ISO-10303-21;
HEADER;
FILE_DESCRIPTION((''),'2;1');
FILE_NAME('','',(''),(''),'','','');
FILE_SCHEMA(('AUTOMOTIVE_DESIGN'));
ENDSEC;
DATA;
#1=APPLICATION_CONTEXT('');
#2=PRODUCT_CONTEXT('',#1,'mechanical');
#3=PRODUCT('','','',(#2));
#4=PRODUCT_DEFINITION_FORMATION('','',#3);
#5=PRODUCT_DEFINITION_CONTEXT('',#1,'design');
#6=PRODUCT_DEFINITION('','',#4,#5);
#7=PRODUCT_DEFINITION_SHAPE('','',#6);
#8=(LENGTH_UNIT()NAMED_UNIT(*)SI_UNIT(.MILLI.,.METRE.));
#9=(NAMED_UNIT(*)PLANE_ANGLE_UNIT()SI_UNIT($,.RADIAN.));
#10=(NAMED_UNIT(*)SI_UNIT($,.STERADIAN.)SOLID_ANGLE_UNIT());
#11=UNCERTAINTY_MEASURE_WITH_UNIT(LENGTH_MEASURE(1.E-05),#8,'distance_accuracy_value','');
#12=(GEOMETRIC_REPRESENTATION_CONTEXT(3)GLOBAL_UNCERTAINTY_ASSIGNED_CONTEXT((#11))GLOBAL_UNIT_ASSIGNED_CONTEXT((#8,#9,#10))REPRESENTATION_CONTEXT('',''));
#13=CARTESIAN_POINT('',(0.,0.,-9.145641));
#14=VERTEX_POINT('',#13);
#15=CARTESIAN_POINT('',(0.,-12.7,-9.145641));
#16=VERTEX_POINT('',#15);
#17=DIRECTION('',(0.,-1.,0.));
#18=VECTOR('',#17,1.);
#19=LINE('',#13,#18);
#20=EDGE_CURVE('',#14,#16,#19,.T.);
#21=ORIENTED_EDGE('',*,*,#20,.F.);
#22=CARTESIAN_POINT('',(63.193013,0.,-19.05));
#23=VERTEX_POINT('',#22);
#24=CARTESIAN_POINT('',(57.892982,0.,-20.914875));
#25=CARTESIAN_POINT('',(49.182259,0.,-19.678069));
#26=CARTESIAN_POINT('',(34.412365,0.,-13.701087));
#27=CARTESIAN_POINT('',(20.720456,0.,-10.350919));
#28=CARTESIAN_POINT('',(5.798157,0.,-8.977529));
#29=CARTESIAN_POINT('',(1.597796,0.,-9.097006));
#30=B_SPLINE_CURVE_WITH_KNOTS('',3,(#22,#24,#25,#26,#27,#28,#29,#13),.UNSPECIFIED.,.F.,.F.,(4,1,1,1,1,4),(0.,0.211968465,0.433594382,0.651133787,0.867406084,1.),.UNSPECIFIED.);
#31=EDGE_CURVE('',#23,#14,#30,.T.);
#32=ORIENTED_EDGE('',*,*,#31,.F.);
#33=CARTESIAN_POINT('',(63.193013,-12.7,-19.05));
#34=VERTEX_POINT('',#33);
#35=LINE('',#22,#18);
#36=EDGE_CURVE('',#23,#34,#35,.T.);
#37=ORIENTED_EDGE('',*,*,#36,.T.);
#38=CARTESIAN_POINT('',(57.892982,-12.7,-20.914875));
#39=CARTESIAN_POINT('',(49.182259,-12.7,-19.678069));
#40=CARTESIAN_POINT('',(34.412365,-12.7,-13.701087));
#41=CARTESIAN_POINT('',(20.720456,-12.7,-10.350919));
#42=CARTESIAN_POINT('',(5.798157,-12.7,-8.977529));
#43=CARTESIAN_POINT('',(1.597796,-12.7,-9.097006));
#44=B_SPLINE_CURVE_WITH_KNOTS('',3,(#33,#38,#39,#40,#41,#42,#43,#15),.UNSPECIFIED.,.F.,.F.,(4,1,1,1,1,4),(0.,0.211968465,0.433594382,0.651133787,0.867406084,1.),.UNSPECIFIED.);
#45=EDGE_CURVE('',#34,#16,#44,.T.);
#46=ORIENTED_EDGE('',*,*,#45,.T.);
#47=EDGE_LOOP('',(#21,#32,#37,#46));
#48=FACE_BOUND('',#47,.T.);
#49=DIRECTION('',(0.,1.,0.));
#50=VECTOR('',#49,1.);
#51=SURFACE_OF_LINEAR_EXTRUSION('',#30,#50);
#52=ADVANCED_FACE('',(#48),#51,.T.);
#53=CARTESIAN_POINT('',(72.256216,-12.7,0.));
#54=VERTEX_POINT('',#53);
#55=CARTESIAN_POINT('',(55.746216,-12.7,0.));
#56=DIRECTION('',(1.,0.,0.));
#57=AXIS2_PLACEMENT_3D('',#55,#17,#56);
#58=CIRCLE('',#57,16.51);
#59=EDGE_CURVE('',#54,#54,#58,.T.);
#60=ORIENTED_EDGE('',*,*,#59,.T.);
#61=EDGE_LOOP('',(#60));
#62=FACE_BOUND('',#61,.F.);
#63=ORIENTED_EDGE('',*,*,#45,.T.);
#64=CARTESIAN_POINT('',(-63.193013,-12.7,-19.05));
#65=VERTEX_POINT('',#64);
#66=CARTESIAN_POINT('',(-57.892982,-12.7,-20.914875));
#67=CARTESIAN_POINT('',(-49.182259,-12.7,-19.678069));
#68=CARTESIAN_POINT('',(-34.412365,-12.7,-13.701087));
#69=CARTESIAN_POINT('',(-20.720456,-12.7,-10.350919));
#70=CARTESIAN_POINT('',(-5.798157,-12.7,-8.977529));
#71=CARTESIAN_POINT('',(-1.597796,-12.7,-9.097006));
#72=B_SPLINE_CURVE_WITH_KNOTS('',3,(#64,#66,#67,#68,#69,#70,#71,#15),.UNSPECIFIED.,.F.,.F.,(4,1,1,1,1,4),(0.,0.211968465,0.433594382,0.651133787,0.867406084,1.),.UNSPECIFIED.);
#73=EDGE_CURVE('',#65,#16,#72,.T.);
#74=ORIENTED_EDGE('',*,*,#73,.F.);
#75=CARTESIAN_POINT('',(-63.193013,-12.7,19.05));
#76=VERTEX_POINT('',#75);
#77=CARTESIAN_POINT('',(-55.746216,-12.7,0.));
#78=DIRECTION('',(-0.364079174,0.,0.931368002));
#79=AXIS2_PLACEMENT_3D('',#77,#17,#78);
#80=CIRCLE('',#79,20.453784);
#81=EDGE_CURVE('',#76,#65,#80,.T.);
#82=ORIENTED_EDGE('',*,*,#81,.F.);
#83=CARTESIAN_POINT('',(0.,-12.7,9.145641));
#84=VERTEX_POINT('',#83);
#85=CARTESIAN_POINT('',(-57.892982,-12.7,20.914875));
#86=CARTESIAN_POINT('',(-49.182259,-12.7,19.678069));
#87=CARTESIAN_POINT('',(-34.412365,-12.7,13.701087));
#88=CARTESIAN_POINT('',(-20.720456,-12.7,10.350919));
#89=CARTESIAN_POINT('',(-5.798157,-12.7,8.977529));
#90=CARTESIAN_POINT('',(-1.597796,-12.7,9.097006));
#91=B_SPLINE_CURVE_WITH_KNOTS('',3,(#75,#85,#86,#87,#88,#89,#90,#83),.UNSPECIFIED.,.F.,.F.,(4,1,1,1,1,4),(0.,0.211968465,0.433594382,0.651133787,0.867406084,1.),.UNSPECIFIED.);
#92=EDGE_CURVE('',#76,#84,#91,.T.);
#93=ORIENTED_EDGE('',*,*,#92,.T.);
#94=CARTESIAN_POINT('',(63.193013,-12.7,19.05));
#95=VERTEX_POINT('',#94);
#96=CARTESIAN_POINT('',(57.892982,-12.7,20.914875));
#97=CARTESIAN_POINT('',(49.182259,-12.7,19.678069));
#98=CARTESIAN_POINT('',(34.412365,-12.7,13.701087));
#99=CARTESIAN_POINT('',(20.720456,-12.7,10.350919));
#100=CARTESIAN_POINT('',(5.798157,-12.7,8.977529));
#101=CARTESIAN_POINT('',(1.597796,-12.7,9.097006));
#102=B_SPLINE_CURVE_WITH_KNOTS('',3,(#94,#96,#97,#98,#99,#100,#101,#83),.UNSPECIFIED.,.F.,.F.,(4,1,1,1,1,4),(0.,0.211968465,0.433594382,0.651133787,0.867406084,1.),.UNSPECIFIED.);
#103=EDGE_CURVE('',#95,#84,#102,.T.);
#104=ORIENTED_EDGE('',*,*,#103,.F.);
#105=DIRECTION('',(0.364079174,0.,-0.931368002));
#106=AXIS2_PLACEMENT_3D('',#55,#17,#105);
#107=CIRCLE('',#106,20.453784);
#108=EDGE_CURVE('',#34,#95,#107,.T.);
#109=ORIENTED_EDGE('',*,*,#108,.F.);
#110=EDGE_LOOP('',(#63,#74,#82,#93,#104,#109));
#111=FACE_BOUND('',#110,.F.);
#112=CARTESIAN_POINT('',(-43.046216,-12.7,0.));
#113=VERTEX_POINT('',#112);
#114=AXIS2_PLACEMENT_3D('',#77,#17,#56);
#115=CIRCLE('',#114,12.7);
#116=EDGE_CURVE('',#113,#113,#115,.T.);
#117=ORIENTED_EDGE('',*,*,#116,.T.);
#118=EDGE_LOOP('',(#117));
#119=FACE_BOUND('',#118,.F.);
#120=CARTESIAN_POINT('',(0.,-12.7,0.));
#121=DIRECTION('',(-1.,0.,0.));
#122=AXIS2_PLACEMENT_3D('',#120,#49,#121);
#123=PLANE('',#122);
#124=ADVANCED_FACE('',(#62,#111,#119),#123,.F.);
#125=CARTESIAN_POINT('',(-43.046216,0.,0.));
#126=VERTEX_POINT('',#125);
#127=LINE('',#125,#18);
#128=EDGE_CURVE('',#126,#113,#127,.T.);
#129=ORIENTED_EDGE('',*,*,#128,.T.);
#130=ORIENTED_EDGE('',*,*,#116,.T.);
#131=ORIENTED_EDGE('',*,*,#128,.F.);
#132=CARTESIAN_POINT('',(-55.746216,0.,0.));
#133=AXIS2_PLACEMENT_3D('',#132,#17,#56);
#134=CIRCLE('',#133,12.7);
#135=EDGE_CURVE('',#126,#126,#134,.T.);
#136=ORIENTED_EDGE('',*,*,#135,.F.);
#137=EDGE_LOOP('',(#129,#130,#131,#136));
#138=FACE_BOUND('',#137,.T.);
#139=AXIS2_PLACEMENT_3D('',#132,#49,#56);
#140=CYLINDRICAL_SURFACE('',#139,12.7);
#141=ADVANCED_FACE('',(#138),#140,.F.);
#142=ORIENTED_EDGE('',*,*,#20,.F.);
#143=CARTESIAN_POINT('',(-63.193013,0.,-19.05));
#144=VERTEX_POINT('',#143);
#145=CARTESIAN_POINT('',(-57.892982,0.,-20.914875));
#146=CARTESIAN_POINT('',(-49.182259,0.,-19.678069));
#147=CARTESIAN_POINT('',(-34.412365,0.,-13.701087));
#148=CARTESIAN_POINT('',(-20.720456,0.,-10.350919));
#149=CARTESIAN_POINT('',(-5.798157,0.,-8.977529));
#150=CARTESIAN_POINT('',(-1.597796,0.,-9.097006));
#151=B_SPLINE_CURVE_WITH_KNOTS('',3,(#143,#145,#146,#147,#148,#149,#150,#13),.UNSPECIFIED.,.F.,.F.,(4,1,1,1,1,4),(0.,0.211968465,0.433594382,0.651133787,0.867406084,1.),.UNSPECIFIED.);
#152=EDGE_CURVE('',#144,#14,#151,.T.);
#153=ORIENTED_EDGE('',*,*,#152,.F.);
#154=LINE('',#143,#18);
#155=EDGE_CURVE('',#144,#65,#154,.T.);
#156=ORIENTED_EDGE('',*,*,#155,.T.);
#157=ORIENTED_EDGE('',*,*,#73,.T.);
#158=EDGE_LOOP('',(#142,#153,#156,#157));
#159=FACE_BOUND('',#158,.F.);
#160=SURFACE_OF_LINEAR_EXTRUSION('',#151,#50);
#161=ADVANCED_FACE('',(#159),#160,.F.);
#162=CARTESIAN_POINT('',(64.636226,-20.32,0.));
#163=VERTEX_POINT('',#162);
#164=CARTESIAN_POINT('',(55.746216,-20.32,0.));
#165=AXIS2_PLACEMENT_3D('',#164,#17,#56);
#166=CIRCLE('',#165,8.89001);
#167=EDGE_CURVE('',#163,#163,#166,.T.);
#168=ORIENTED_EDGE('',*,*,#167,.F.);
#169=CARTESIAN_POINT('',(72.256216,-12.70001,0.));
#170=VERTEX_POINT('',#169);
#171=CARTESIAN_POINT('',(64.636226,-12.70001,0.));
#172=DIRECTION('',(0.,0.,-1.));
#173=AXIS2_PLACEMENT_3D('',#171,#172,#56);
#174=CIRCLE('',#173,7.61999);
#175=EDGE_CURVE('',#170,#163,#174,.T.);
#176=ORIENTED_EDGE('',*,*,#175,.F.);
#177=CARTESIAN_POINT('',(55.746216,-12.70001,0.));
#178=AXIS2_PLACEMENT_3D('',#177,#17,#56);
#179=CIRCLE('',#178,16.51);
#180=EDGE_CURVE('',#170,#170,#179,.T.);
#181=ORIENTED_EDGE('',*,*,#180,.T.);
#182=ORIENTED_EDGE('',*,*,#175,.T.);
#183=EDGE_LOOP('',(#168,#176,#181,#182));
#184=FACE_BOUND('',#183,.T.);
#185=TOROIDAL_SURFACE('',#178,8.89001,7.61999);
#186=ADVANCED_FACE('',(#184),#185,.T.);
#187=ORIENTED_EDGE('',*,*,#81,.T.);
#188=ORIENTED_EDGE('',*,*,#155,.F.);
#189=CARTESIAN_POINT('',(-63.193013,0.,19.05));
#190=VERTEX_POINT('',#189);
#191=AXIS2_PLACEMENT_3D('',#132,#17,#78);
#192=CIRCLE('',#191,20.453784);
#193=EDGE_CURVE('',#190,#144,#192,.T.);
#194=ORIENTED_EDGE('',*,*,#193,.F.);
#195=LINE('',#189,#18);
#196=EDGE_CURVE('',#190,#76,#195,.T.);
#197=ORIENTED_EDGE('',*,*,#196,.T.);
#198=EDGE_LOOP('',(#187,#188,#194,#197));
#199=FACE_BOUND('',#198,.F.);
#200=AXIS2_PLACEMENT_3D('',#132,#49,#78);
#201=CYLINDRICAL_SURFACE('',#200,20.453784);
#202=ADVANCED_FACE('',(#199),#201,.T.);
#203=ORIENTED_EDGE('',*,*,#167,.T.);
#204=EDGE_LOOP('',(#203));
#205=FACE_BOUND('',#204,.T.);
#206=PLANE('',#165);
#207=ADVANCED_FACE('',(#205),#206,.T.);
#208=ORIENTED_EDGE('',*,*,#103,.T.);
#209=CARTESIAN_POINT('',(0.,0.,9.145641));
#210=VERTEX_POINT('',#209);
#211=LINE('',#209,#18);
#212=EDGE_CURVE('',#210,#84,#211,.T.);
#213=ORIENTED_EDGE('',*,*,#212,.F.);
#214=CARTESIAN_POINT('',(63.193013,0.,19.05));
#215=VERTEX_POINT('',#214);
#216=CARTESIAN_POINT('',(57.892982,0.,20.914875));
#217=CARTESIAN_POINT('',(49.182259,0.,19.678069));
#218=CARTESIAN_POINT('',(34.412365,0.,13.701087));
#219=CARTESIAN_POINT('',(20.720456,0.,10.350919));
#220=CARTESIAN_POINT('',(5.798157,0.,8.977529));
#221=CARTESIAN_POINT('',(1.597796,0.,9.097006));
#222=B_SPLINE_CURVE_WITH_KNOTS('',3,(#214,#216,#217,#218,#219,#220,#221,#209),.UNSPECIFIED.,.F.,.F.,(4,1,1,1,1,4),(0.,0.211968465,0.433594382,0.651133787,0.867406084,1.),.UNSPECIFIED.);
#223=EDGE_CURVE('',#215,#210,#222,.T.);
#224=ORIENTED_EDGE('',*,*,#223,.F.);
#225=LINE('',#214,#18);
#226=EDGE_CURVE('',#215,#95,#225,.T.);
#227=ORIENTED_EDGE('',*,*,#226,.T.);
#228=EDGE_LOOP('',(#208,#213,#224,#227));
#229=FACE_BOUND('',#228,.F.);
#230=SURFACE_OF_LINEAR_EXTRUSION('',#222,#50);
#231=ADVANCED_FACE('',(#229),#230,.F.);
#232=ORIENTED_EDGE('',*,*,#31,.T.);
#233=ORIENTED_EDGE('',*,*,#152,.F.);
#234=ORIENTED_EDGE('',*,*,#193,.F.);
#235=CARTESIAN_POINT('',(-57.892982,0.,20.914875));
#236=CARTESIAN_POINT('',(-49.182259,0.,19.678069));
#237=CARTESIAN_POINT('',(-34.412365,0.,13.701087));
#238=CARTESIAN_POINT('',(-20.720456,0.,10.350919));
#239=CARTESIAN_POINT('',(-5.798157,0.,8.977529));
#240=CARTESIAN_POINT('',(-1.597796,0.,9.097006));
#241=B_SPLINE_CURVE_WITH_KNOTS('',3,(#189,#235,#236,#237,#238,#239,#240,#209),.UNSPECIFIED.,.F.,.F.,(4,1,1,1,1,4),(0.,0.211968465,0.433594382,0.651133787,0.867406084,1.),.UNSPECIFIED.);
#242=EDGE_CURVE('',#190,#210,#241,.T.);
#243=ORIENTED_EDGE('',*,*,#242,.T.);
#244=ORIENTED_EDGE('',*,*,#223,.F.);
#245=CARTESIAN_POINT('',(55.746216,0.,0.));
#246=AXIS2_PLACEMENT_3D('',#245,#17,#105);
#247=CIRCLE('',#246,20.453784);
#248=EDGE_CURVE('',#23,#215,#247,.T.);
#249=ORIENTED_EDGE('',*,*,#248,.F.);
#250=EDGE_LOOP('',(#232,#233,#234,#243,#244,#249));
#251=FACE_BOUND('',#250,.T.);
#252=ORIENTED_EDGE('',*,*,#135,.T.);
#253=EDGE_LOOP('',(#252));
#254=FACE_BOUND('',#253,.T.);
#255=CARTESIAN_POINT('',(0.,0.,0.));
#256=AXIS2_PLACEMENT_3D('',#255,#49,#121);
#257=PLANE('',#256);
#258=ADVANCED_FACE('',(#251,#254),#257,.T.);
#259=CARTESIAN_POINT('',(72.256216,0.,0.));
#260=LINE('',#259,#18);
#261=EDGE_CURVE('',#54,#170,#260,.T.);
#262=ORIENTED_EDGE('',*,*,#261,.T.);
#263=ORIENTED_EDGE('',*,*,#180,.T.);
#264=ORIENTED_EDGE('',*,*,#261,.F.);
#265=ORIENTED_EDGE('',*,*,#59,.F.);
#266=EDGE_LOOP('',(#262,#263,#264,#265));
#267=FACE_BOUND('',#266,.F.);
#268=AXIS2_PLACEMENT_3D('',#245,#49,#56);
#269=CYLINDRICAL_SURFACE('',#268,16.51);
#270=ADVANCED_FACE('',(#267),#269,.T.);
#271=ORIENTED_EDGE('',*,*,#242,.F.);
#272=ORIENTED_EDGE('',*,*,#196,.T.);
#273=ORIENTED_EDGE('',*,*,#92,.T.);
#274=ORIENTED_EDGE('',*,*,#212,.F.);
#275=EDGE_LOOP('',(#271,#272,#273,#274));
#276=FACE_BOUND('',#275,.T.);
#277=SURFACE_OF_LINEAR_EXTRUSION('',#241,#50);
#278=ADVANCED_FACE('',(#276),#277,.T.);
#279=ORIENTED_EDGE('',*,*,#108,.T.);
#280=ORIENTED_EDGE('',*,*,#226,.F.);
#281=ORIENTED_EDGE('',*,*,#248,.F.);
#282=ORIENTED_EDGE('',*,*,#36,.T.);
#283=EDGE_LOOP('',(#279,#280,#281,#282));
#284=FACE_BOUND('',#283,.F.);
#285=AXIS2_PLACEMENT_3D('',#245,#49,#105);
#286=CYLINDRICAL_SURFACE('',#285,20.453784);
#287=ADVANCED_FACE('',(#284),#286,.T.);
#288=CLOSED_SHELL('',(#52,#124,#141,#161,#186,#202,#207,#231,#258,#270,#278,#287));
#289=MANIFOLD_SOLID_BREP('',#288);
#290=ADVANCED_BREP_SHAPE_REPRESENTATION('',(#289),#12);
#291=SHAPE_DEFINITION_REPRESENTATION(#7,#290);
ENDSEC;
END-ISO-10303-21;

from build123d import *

# Parameters (mm, degrees)
F0_R     = 12.7
F0_R_2   = 16.51
F1_DEPTH = 12.7
F2_DEPTH = 20.32
F3_R     = 7.61999


# Not quite as in the source:
# - a fillet or chamfer is up to 0.001 mm smaller than in the source, because OpenCascade refuses the exact size


with BuildPart() as f1:
    # F0 (on Front) → F1 (new body)
    with BuildSketch(Plane.XZ):
        with BuildLine():
            add(Edge.make_bspline(
                [(63.1930127424, -19.05), (57.8929819167, -20.9148749709), (49.1822585518, -19.6780685204), (34.4123652883, -13.7010865969), (20.7204562035, -10.3509186108), (5.798157397, -8.9775289718), (1.5977957695, -9.0970061045), (0, -9.1456407681)],
                knots=[0, 0, 0, 0, 0.2119684652, 0.4335943825, 0.6511337867, 0.8674060842, 1, 1, 1, 1], degree=3))
            ThreePointArc((63.1930127424, -19.05), (76.2, 0), (63.1930127424, 19.05))
            add(Edge.make_bspline(
                [(63.1930127424, 19.05), (57.8929819167, 20.9148749709), (49.1822585518, 19.6780685204), (34.4123652883, 13.7010865969), (20.7204562035, 10.3509186108), (5.798157397, 8.9775289718), (1.5977957695, 9.0970061045), (0, 9.1456407681)],
                knots=[0, 0, 0, 0, 0.2119684652, 0.4335943825, 0.6511337867, 0.8674060842, 1, 1, 1, 1], degree=3))
            add(Edge.make_bspline(
                [(-63.1930127424, 19.05), (-57.8929819167, 20.9148749709), (-49.1822585518, 19.6780685204), (-34.4123652883, 13.7010865969), (-20.7204562035, 10.3509186108), (-5.798157397, 8.9775289718), (-1.5977957695, 9.0970061045), (0, 9.1456407681)],
                knots=[0, 0, 0, 0, 0.2119684652, 0.4335943825, 0.6511337867, 0.8674060842, 1, 1, 1, 1], degree=3))
            ThreePointArc((-63.1930127424, 19.05), (-76.2, 0), (-63.1930127424, -19.05))
            add(Edge.make_bspline(
                [(-63.1930127424, -19.05), (-57.8929819167, -20.9148749709), (-49.1822585518, -19.6780685204), (-34.4123652883, -13.7010865969), (-20.7204562035, -10.3509186108), (-5.798157397, -8.9775289718), (-1.5977957695, -9.0970061045), (0, -9.1456407681)],
                knots=[0, 0, 0, 0, 0.2119684652, 0.4335943825, 0.6511337867, 0.8674060842, 1, 1, 1, 1], degree=3))
        make_face()
        with Locations((-55.7462159306, 0)):
            Circle(F0_R, mode=Mode.SUBTRACT)
        with Locations((55.7462159306, 0)):
            Circle(F0_R_2, mode=Mode.SUBTRACT)
    extrude(amount=F1_DEPTH)

    # F0 (on Front) → F2 (join)
    with BuildSketch(Plane.XZ):
        with Locations((55.7462159306, 0)):
            Circle(F0_R_2)
    extrude(amount=F2_DEPTH)

    # F3 (radius 7.62 in the source; OpenCascade refuses exactly that, so slightly less here)
    f3_edges = [f1.edges().sort_by_distance(p)[0] for p in [
        (39.236216, -20.32, 0),
    ]]
    fillet(f3_edges, radius=F3_R)


solid = f1.part
